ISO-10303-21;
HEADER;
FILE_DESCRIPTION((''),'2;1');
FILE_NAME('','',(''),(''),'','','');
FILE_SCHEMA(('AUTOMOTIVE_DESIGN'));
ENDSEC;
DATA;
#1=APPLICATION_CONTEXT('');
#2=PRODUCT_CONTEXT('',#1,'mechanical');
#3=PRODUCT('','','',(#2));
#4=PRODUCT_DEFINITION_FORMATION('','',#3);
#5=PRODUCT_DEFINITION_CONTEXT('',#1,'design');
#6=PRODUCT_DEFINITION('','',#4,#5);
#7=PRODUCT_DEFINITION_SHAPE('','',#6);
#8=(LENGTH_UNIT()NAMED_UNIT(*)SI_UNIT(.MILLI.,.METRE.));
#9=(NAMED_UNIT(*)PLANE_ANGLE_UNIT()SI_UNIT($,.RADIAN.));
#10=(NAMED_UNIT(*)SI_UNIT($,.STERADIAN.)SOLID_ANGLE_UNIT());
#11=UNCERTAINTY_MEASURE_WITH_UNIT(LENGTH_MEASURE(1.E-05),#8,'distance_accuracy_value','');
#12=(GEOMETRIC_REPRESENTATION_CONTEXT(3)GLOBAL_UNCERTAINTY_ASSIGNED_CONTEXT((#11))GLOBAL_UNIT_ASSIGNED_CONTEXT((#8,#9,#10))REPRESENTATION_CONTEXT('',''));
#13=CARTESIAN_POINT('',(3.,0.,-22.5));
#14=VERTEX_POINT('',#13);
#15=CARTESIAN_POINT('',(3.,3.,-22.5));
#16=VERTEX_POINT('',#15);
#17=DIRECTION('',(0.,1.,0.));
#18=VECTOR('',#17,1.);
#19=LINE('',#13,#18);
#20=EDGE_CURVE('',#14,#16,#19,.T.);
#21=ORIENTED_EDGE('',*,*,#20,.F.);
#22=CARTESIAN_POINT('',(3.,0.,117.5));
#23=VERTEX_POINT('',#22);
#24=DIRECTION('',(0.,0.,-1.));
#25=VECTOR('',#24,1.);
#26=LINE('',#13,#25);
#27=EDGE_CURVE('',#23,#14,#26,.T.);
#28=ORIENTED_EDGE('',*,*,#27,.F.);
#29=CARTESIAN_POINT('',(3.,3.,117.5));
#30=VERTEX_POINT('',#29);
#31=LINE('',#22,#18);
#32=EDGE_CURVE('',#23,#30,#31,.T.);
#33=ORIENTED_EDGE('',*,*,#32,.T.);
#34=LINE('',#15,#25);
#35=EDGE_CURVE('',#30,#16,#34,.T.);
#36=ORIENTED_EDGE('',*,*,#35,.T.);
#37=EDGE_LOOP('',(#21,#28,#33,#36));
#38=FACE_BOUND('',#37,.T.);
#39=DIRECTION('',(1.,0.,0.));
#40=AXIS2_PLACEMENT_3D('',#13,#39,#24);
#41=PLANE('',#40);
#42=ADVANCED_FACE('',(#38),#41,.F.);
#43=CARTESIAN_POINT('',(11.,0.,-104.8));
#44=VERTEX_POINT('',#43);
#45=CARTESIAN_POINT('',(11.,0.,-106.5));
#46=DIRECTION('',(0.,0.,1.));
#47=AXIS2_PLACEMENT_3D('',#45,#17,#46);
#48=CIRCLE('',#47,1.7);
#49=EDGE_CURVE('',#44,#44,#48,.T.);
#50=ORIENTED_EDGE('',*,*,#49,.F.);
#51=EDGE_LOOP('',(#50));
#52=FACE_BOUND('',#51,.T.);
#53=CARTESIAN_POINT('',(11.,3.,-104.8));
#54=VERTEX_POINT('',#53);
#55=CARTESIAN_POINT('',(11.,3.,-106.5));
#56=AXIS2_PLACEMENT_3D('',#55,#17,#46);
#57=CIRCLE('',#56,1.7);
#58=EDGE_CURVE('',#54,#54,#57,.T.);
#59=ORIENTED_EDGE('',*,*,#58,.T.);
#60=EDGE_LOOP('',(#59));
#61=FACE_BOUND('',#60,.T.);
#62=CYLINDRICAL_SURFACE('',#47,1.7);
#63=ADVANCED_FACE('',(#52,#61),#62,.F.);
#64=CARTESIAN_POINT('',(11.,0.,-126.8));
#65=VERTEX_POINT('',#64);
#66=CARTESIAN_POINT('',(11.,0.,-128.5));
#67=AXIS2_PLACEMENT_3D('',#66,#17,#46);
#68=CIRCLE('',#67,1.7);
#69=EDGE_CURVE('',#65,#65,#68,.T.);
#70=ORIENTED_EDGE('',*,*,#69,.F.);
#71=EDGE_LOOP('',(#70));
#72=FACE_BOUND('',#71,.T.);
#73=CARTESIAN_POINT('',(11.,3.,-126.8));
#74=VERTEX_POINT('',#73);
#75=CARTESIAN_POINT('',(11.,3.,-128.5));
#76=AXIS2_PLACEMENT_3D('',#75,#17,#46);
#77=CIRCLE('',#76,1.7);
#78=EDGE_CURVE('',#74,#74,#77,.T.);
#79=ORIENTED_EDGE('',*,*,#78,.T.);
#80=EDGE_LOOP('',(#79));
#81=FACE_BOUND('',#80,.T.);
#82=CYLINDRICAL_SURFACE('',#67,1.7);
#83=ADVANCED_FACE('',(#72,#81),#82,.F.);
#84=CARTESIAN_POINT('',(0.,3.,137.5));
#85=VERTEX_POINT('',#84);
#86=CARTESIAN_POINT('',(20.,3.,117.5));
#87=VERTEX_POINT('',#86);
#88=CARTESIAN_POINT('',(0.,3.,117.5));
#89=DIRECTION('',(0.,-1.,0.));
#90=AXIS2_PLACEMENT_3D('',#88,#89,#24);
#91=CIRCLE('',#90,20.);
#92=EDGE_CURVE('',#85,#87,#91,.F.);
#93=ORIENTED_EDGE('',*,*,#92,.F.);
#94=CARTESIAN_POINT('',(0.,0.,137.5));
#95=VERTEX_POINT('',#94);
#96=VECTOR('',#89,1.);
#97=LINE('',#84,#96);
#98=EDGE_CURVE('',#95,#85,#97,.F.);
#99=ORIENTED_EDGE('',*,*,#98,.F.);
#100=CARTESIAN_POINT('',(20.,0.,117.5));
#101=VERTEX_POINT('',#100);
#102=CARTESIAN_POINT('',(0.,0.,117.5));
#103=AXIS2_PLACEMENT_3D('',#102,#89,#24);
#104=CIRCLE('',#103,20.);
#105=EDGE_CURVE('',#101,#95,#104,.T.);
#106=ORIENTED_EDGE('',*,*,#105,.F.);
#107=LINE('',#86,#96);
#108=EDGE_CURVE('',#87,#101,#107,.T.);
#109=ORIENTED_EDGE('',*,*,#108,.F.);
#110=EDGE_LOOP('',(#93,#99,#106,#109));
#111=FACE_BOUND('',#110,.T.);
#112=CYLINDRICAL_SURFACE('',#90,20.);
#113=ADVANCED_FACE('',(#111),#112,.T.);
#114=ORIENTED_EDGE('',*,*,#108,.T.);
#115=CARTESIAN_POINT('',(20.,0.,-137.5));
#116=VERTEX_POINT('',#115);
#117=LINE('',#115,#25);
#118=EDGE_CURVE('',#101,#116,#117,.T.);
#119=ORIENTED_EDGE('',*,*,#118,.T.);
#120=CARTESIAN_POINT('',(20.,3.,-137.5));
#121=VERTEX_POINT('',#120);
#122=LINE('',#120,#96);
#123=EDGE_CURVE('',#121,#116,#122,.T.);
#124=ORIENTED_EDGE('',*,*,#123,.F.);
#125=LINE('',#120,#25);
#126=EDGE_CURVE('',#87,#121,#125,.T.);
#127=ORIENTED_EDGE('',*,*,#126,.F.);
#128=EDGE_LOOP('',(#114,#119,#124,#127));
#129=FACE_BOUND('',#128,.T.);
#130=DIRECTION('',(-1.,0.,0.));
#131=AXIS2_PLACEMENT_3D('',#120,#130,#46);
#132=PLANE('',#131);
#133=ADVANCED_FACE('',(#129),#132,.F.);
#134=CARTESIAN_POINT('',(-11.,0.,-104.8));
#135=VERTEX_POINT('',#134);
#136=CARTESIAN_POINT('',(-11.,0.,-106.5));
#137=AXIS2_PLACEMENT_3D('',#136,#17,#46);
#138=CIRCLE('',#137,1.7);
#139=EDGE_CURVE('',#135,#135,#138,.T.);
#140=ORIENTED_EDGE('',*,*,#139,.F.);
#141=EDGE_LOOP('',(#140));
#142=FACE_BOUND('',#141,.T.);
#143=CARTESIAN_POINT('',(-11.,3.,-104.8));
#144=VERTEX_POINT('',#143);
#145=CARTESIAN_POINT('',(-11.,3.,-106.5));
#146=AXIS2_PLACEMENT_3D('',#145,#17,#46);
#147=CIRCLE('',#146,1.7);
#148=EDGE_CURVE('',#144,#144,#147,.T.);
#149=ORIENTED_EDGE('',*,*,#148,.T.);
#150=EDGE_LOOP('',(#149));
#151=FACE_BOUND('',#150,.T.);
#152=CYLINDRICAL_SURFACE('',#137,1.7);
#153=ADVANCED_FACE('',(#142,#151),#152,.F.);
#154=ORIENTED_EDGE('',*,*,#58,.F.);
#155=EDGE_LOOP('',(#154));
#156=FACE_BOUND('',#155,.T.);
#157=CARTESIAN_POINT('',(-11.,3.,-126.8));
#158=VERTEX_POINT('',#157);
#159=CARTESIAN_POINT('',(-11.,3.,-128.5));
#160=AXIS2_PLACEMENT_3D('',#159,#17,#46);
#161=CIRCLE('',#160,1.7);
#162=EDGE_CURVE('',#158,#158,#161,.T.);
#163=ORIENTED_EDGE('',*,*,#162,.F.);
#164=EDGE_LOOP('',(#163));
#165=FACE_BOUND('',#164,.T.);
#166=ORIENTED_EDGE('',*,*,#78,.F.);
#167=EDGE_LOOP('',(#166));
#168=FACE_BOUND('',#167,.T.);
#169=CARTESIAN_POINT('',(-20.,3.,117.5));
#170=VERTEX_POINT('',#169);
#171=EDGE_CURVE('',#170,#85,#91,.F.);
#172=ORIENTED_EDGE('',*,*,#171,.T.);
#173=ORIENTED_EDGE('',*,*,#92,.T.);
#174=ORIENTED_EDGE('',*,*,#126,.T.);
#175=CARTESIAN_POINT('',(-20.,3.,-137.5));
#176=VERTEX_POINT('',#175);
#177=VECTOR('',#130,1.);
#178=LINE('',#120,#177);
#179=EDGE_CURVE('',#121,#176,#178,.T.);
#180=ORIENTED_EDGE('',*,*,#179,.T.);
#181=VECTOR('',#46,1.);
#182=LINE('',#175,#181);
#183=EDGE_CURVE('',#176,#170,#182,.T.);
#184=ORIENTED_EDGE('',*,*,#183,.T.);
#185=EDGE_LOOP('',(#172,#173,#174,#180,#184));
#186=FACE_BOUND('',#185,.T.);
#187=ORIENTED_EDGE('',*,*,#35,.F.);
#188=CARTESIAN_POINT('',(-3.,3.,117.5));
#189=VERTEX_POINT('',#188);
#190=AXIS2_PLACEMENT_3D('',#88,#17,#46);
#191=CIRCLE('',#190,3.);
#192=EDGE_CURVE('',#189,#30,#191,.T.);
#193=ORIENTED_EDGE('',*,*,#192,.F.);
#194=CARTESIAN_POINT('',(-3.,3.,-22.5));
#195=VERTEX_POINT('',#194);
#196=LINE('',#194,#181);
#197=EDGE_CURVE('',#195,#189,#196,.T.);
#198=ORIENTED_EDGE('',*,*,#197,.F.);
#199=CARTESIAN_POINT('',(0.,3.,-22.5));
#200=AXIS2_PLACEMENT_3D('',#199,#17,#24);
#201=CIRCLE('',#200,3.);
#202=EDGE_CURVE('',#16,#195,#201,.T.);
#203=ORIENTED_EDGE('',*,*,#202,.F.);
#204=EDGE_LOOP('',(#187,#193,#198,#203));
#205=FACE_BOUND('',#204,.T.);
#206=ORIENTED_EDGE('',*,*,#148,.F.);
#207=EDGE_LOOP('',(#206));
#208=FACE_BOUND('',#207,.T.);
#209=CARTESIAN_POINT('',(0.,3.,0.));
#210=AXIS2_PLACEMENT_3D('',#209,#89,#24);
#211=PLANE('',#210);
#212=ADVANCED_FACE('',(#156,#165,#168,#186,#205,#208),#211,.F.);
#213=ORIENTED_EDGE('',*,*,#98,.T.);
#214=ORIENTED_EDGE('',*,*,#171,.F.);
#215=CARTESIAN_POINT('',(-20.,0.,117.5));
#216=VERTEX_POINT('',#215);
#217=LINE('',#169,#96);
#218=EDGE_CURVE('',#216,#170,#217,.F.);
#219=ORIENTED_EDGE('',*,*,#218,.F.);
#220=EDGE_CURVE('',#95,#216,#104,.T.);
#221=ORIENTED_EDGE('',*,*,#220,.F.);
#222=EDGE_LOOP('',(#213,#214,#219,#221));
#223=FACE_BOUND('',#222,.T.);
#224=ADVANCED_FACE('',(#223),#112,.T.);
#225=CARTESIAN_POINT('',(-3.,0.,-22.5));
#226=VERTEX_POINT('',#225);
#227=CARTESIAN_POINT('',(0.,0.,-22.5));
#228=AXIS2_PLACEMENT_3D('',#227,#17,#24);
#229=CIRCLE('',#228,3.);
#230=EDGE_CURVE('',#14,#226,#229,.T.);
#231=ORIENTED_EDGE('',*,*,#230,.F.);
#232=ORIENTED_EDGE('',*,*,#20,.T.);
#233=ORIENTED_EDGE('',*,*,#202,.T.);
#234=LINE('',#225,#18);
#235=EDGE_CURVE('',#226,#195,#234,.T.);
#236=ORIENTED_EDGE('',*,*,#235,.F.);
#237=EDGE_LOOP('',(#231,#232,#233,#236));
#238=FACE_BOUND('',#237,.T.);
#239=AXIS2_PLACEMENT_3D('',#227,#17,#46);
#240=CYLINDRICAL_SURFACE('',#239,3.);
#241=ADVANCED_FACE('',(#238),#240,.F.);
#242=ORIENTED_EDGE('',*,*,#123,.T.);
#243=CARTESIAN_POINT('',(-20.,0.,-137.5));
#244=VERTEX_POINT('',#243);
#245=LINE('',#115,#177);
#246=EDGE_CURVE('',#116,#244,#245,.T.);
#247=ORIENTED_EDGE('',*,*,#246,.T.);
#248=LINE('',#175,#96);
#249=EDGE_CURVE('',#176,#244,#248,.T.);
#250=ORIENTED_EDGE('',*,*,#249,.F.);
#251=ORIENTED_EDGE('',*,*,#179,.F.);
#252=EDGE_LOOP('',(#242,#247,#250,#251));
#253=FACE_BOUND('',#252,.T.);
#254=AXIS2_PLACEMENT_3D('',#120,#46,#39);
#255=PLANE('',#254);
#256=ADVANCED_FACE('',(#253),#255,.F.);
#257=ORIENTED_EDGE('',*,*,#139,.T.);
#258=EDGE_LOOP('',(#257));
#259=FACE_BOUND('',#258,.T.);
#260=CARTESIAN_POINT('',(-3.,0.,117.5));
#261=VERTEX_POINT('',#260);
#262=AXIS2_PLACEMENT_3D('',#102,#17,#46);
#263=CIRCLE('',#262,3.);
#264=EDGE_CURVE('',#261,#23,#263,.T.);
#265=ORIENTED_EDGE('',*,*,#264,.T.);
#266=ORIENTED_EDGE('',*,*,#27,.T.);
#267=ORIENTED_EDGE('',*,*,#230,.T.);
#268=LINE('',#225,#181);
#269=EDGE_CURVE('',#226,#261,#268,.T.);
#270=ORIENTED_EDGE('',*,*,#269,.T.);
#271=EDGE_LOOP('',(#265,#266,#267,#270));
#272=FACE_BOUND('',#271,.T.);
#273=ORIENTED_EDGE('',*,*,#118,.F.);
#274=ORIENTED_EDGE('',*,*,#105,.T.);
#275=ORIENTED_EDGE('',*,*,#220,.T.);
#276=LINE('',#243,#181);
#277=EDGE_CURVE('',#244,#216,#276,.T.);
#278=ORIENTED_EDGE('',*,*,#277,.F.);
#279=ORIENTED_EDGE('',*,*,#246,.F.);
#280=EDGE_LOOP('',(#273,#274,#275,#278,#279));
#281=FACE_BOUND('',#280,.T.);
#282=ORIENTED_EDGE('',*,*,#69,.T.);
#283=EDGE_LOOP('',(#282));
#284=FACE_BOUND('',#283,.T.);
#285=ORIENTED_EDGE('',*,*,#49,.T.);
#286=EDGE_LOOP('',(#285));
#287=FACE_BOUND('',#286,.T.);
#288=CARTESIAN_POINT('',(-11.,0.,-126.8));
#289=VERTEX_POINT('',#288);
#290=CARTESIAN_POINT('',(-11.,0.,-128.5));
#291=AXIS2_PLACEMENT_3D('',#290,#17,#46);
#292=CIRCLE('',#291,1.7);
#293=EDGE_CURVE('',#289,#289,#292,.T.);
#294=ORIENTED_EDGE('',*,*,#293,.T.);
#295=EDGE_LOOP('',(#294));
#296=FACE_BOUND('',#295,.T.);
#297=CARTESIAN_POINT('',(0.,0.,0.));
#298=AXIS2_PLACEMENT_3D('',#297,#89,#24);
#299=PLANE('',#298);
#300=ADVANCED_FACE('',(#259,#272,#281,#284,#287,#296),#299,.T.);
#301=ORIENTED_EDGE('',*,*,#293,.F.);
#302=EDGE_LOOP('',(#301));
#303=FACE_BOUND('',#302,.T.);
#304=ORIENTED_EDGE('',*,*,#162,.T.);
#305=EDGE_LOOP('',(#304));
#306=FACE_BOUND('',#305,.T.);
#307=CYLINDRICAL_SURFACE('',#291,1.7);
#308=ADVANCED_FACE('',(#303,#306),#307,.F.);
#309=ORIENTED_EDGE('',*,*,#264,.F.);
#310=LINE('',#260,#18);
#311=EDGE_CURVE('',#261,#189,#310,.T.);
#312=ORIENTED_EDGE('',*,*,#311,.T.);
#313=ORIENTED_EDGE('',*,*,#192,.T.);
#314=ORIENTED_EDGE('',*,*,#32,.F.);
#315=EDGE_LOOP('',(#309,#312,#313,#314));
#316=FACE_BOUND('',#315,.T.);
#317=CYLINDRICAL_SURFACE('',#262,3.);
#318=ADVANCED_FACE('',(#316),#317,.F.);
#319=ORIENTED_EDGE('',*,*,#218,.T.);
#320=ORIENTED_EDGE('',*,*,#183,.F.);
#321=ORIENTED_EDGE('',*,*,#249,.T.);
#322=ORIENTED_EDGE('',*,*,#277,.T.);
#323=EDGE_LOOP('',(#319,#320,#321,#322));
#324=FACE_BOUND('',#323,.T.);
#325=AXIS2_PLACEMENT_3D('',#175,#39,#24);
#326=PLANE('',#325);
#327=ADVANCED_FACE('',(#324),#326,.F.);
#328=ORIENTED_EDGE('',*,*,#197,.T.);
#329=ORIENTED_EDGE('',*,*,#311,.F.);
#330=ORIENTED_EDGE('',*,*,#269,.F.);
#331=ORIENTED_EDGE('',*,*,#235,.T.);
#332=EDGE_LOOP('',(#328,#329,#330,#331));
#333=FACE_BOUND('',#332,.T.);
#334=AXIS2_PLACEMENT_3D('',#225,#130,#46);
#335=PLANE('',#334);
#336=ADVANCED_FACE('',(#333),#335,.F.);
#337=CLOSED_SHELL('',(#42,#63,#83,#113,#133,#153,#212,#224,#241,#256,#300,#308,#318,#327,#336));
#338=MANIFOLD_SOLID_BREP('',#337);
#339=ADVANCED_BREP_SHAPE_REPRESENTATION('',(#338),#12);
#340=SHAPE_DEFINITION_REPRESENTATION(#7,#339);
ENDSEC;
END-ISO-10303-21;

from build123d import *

# Parameters (mm, degrees)
SKETCH1_W           = 40
SKETCH1_H           = 275
BOSS_EXTRUDE1_DEPTH = 3
SKETCH2_R           = 1.7
CUT_EXTRUDE1_DEPTH  = 139.979315008
FILLET1_R           = 20
CUT_EXTRUDE2_DEPTH  = 139.979315008


with BuildPart() as part:
    # Sketch1 → Boss-Extrude1 (new body)
    with BuildSketch(Plane(origin=(0, 0, 0), x_dir=(1, 0, 0), z_dir=(0, 1, 0))):
        Rectangle(SKETCH1_W, SKETCH1_H)
    extrude(amount=BOSS_EXTRUDE1_DEPTH)

    # Sketch2 → Cut-Extrude1 (cut, through all)
    with BuildSketch(Plane(origin=(0, 3, 0), x_dir=(1, 0, 0), z_dir=(0, 1, 0))):
        with Locations(Location((-11, 128.5, 0), (0, 0, 270))):
            Circle(SKETCH2_R)
        with Locations(Location((-11, 106.5, 0), (0, 0, 270))):
            Circle(SKETCH2_R)
        with Locations(Location((11, 128.5, 0), (0, 0, 270))):
            Circle(SKETCH2_R)
        with Locations(Location((11, 106.5, 0), (0, 0, 270))):
            Circle(SKETCH2_R)
    extrude(amount=-CUT_EXTRUDE1_DEPTH, mode=Mode.SUBTRACT)

    # Fillet1
    fillet1_edges = [part.edges().sort_by_distance(p)[0] for p in [
        (-20, 1.5, 137.5),
        (20, 1.5, 137.5),
    ]]
    fillet(fillet1_edges, radius=FILLET1_R - 0.0001)  # a hair under: the kernel refuses the full size

    # Sketch3 → Cut-Extrude2 (cut, through all)
    with BuildSketch(Plane(origin=(0, 3, 0), x_dir=(1, 0, 0), z_dir=(0, 1, 0))):
        with BuildLine():
            Line((-3, 22.5), (-3, -117.5))
            ThreePointArc((-3, -117.5), (0, -120.5), (3, -117.5))
            Line((3, -117.5), (3, 22.5))
            ThreePointArc((3, 22.5), (0, 25.5), (-3, 22.5))
        make_face()
    extrude(amount=-CUT_EXTRUDE2_DEPTH, mode=Mode.SUBTRACT)


solid = part.part
